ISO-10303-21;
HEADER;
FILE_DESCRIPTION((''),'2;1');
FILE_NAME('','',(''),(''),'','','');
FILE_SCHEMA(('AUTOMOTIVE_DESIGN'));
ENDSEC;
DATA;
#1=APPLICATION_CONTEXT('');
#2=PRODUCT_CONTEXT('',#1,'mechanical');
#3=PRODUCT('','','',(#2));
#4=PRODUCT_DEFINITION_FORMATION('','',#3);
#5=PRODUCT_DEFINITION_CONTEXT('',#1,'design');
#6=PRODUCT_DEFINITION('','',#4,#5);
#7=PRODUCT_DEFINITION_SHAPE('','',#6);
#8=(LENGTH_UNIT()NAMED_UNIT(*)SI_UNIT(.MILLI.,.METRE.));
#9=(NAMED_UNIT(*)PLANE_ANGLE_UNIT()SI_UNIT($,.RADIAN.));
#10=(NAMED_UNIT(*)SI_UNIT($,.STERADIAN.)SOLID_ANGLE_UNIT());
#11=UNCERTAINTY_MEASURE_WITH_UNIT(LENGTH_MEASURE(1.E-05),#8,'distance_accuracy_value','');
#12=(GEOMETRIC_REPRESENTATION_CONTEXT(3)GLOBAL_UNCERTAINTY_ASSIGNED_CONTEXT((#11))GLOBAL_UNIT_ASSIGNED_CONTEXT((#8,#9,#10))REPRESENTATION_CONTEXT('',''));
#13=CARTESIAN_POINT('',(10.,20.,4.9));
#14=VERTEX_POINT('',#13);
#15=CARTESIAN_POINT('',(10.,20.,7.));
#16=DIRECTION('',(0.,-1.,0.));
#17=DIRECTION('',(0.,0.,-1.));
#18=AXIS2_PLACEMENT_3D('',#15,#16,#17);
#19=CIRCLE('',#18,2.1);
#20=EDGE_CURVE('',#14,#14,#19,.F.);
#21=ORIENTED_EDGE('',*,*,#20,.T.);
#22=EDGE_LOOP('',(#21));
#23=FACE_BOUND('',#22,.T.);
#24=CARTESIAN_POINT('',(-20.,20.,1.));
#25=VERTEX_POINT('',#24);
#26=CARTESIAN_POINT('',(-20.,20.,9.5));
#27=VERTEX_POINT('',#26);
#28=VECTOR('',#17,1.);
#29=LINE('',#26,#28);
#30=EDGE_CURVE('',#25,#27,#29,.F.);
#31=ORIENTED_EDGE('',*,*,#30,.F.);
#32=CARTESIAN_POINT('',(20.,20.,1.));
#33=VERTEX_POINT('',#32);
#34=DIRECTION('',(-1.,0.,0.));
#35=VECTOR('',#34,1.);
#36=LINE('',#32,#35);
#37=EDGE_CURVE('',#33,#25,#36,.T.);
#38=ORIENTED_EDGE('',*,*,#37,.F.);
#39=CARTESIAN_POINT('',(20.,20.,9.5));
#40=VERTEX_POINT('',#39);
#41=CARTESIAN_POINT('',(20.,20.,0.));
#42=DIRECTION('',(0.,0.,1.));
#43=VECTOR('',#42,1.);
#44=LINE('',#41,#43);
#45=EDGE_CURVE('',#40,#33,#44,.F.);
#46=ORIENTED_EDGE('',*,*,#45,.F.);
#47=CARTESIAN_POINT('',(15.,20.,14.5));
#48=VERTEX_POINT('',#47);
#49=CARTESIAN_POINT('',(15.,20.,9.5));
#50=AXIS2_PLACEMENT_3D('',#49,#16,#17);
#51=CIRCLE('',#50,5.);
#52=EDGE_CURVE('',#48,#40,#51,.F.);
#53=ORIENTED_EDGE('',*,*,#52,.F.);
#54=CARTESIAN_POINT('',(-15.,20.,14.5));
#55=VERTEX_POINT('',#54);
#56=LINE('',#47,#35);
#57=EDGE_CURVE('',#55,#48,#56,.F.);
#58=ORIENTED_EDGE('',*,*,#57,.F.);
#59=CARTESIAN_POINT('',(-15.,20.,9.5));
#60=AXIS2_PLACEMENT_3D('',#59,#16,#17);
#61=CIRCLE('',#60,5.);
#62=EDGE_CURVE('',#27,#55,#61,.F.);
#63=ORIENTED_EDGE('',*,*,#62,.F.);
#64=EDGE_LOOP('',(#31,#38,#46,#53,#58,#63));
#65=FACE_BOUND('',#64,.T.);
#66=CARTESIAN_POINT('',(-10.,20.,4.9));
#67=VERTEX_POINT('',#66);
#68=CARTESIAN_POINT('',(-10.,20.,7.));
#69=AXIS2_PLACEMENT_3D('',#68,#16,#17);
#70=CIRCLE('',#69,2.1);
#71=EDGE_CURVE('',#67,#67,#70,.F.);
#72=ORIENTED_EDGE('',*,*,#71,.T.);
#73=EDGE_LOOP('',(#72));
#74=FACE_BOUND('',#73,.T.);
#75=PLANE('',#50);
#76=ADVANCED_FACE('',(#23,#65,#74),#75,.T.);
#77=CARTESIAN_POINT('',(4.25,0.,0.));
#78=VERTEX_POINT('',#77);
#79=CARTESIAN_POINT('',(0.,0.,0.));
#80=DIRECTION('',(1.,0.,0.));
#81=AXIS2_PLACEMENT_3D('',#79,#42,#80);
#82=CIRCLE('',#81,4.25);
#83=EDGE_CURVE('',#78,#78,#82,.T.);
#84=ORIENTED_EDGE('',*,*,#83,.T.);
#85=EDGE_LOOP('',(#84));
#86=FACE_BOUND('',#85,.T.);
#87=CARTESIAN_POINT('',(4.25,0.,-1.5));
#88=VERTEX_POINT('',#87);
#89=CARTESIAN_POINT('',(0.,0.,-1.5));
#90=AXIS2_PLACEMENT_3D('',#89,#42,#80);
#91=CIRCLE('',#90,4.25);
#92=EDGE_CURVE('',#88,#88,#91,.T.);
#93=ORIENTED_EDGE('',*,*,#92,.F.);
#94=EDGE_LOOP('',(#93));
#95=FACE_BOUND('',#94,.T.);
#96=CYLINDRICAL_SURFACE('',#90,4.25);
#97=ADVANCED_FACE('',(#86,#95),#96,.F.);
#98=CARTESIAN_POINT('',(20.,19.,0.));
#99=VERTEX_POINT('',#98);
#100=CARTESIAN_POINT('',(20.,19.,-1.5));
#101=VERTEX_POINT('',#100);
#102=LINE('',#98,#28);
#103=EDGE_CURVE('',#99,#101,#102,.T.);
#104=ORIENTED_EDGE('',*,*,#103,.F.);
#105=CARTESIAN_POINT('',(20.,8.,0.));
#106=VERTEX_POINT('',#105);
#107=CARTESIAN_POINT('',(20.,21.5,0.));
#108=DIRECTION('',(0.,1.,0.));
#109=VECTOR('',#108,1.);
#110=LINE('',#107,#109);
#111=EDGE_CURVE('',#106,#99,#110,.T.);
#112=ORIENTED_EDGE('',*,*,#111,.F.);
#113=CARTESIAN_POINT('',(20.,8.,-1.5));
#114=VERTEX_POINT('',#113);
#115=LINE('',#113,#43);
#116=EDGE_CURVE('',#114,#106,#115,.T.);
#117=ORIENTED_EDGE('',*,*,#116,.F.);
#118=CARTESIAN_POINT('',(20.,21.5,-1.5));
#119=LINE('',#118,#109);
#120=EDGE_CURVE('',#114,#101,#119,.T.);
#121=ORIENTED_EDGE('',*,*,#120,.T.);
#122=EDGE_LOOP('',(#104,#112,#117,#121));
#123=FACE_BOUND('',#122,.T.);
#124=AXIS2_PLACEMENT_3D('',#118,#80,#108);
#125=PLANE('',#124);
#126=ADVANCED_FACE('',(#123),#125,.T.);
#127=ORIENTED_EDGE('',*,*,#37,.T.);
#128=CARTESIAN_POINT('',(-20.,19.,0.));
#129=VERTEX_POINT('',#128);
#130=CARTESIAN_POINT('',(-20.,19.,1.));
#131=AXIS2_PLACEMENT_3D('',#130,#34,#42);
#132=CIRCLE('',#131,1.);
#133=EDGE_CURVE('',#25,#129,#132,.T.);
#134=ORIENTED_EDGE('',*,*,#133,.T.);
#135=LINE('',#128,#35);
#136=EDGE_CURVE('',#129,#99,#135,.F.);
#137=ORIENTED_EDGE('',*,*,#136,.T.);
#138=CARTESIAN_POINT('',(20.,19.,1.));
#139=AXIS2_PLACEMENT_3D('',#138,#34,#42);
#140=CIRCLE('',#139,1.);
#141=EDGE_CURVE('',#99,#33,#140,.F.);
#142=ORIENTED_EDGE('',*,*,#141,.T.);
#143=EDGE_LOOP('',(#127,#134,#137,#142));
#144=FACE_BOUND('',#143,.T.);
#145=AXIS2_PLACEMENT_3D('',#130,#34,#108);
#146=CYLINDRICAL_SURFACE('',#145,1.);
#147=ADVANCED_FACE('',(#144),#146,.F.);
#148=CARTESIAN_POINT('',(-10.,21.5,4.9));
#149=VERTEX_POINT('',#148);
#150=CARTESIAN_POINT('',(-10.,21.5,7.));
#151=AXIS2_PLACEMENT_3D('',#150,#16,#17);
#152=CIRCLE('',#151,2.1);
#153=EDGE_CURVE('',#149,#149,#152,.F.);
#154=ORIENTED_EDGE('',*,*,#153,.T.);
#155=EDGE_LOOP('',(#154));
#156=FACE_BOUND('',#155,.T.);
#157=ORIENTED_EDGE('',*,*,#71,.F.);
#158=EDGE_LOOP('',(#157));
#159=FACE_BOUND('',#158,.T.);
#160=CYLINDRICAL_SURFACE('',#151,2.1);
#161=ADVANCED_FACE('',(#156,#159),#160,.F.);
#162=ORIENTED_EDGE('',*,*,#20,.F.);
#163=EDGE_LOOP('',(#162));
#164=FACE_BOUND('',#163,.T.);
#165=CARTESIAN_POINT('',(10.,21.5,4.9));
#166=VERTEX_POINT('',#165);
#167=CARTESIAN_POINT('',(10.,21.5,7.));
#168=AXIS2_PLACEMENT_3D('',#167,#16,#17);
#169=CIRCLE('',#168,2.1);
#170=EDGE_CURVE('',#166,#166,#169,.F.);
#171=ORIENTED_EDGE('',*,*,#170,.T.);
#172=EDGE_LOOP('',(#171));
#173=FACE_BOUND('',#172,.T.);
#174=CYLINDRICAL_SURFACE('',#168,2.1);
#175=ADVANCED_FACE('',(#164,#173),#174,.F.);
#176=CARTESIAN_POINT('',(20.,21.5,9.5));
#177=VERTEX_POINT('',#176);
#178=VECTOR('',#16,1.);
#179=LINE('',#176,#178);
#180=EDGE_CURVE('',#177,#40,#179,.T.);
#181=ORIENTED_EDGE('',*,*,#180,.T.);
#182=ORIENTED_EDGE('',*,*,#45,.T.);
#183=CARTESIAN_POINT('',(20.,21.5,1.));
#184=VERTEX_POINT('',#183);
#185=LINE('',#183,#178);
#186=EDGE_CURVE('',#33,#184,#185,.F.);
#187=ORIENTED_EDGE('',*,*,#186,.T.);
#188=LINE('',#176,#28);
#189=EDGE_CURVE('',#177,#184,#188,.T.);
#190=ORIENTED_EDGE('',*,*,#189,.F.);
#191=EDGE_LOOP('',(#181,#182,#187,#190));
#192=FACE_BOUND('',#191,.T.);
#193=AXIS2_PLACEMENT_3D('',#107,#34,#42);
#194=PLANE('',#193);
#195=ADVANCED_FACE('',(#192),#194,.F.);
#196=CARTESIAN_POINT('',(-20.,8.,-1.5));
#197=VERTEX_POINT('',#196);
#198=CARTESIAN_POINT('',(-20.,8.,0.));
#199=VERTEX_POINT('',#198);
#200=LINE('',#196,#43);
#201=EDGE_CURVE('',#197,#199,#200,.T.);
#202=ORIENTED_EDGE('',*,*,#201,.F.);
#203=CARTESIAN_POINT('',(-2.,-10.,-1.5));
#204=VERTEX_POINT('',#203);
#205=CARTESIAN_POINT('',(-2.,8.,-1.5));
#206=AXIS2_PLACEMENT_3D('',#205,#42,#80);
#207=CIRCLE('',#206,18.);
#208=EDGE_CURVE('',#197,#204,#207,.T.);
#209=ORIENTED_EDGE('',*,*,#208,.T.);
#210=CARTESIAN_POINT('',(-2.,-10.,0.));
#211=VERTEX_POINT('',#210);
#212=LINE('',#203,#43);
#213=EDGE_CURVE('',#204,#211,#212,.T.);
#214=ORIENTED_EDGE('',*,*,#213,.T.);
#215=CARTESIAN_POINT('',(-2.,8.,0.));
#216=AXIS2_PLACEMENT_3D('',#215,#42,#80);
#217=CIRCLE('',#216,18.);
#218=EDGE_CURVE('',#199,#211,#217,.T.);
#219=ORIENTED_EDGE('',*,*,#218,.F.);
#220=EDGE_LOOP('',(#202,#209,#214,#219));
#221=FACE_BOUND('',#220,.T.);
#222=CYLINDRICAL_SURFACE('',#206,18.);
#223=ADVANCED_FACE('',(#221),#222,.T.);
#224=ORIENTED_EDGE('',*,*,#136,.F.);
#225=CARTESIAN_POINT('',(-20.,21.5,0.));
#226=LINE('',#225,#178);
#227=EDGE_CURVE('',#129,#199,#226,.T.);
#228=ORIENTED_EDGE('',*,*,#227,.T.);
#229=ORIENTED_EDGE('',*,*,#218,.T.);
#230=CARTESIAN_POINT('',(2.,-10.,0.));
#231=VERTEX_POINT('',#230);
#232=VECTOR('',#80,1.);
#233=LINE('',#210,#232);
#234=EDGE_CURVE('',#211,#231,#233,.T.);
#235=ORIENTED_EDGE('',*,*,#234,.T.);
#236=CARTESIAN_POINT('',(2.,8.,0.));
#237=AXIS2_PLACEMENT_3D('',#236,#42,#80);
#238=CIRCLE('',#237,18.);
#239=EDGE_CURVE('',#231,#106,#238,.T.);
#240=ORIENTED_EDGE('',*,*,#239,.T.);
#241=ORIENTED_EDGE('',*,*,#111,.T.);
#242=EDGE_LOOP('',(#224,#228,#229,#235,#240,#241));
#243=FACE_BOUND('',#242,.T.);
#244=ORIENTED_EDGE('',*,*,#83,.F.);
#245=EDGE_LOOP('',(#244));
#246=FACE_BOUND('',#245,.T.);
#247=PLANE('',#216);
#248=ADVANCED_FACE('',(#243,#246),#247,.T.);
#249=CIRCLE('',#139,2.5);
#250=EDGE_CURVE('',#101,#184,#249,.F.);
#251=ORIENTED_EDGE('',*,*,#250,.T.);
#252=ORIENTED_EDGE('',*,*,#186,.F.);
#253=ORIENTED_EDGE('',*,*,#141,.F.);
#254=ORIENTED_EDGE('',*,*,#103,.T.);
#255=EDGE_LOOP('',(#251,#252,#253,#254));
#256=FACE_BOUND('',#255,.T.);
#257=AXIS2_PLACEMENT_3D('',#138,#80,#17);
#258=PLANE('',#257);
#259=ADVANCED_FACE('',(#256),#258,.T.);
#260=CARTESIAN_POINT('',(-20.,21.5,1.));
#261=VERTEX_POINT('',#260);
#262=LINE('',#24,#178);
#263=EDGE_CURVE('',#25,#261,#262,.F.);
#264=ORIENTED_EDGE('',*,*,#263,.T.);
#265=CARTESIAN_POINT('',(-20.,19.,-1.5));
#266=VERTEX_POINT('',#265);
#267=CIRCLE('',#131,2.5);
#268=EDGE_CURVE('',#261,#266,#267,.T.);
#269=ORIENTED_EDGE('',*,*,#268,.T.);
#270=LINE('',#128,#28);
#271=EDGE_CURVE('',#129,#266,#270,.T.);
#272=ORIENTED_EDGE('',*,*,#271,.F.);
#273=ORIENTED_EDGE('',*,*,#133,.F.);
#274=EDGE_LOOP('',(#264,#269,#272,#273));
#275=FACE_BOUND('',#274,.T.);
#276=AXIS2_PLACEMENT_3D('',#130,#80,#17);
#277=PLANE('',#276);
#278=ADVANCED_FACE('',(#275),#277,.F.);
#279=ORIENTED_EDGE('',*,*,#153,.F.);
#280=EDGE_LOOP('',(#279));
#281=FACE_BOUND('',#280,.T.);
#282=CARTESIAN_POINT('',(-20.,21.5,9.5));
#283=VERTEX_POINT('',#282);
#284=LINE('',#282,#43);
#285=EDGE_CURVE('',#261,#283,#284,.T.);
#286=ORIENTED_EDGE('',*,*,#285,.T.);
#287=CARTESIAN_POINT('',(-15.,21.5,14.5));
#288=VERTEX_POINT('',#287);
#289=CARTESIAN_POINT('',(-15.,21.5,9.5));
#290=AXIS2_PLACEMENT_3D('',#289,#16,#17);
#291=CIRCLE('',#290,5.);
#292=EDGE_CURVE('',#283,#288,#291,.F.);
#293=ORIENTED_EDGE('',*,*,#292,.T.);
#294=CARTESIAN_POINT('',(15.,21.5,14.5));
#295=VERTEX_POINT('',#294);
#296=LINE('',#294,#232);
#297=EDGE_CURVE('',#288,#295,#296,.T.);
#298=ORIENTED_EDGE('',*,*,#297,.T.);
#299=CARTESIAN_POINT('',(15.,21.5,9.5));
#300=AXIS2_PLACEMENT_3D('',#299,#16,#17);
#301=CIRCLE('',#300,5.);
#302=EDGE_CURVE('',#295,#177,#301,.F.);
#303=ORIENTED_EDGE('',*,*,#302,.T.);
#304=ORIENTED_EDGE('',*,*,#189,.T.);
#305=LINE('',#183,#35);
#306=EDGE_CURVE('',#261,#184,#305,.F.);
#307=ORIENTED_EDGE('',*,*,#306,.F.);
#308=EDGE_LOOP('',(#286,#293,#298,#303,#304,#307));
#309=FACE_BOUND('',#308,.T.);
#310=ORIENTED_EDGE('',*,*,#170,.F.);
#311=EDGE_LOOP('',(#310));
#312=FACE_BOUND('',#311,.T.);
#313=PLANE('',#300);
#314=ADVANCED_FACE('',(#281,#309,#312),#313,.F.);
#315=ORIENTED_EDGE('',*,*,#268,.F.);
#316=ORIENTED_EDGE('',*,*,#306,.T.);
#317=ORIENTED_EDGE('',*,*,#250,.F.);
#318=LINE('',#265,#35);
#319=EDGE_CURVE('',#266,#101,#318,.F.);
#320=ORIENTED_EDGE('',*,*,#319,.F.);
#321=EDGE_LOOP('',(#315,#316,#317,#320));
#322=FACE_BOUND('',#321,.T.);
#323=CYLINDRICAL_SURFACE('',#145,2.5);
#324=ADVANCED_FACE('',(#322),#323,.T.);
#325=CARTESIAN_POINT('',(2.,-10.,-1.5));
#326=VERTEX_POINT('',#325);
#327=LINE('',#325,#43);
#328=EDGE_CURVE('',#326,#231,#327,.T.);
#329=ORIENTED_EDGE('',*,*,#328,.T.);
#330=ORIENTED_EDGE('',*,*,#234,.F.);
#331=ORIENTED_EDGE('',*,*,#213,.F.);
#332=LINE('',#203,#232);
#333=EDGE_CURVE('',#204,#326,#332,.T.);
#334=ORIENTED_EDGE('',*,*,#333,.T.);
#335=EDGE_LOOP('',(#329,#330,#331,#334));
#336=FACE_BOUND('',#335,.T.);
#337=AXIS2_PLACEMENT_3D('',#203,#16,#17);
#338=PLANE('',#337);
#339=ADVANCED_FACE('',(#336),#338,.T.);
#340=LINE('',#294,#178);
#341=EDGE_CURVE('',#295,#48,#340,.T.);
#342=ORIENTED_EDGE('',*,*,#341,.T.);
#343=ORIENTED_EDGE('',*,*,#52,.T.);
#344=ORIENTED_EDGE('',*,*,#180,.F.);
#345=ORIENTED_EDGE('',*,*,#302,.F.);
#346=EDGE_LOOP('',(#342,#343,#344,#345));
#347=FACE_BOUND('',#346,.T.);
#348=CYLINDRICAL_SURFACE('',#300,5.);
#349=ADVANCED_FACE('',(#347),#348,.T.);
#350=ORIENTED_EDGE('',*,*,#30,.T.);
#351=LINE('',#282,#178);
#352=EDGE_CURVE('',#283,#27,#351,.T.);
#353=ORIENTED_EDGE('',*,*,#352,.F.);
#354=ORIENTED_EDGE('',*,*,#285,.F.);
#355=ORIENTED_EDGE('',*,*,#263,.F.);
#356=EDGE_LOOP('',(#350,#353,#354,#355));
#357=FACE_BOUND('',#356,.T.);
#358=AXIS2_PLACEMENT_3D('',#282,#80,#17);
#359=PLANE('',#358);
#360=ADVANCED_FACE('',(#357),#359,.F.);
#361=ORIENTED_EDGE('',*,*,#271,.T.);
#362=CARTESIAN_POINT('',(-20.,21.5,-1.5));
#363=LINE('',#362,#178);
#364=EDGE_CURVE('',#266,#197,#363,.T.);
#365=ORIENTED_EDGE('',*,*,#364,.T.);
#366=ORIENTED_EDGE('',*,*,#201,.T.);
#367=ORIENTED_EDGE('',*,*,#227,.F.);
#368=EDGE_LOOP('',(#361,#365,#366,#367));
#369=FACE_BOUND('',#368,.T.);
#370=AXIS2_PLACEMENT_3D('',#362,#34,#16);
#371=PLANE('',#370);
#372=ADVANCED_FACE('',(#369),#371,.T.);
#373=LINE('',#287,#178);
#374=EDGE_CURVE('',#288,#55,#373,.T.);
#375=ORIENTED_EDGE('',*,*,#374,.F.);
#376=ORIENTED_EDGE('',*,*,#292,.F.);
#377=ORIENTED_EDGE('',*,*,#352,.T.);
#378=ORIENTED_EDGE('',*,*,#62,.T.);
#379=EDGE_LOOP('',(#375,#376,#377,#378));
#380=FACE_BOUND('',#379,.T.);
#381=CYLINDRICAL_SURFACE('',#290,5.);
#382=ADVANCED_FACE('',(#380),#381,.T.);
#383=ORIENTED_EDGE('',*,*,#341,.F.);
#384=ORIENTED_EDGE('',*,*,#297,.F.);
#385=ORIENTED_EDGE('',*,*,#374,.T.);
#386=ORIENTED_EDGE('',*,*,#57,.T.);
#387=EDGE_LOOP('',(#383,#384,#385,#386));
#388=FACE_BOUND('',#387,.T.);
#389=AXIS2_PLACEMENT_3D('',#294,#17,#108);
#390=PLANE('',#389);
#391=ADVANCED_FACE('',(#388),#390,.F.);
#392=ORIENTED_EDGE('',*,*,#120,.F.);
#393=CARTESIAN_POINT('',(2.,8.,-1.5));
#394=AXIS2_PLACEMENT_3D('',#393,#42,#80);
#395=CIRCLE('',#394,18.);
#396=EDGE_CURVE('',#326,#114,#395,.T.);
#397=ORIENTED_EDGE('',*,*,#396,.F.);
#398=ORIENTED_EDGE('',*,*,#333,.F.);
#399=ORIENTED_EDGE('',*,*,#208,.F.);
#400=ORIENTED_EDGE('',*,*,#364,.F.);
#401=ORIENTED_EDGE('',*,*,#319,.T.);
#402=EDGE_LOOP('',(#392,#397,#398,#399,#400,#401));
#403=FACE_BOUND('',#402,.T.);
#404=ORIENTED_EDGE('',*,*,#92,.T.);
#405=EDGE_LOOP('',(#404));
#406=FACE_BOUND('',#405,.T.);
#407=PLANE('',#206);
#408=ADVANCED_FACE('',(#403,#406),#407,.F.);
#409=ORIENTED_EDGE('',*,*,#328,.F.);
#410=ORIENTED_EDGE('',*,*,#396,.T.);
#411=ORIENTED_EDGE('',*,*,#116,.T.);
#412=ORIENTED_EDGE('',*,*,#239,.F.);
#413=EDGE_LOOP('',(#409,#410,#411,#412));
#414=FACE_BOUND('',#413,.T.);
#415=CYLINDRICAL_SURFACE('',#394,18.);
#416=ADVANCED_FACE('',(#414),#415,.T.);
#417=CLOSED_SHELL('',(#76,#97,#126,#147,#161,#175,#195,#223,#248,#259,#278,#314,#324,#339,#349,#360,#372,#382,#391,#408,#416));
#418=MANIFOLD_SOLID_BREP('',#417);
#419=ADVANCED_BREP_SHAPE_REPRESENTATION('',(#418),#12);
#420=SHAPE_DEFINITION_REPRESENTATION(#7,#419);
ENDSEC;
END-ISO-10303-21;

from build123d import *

# Parameters (mm, degrees)
SKETCH_1_R                       = 4.25
SM_BASE_FLANGE_1_DEPTH           = 1.5
SM_EDGE_FLANGE_1_STRIP_W         = 8
SM_EDGE_FLANGE_1_STRIP_H         = 1.5
SM_EDGE_FLANGE_1_STRIP_CUT_DEPTH = 40
SM_EDGE_FLANGE_1_DEPTH           = 40
SM_EDGE_FLANGE_1_PROFILE_R       = 2.1
SM_EDGE_FLANGE_1_FLAT_DEPTH      = 1.5


# Sheet-metal steps are written as plain solids
with BuildPart() as part:
    # Sketch 1 → 基体-法兰1 (new body)
    with BuildSketch(Plane.XY):
        with BuildLine():
            Line((-20, 21.5), (20, 21.5))
            Line((20, 21.5), (20, 8))
            ThreePointArc((20, 8), (14.727922061, -4.727922061), (2, -10))
            Line((2, -10), (-2, -10))
            ThreePointArc((-2, -10), (-14.727922061, -4.727922061), (-20, 8))
            Line((-20, 8), (-20, 21.5))
        make_face()
        Circle(SKETCH_1_R, mode=Mode.SUBTRACT)
    extrude(amount=-SM_BASE_FLANGE_1_DEPTH)

    # 边线-法兰1 strip (across the edge) → 边线-法兰1 strip cut (cut)
    with BuildSketch(Plane(origin=(20, 21.5, 0), x_dir=(0, -1, 0), z_dir=(-1, 0, 0))):
        with Locations((-1.5, -0.75)):
            Rectangle(SM_EDGE_FLANGE_1_STRIP_W, SM_EDGE_FLANGE_1_STRIP_H)
    extrude(amount=SM_EDGE_FLANGE_1_STRIP_CUT_DEPTH, mode=Mode.SUBTRACT)

    # 边线-法兰1 bend section (across the edge) → 边线-法兰1 (add)
    with BuildSketch(Plane(origin=(20, 21.5, 0), x_dir=(0, -1, 0), z_dir=(-1, 0, 0))):
        with BuildLine():
            Line((0, 1), (1.5, 1))
            ThreePointArc((1.5, 1), (1.792893219, 0.292893219), (2.5, 0))
            Line((2.5, 0), (2.5, -1.5))
            ThreePointArc((2.5, -1.5), (0.732233047, -0.767766953), (0, 1))
        make_face()
    extrude(amount=SM_EDGE_FLANGE_1_DEPTH)

    # 边线-法兰1 profile (on flange) → 边线-法兰1 flat (add)
    with BuildSketch(Plane(origin=(0, 21.5, 0), x_dir=(-1, 0, 0), z_dir=(0, 1, 0))):
        with BuildLine():
            Line((15, 14.5), (-15, 14.5))
            ThreePointArc((-15, 14.5), (-18.535533906, 13.035533906), (-20, 9.5))
            Line((-20, 9.5), (-20, 1))
            Line((-20, 1), (20, 1))
            Line((20, 1), (20, 9.5))
            ThreePointArc((20, 9.5), (18.535533906, 13.035533906), (15, 14.5))
        make_face()
        with Locations((-10, 7)):
            Circle(SM_EDGE_FLANGE_1_PROFILE_R, mode=Mode.SUBTRACT)
        with Locations((10, 7)):
            Circle(SM_EDGE_FLANGE_1_PROFILE_R, mode=Mode.SUBTRACT)
    extrude(amount=-SM_EDGE_FLANGE_1_FLAT_DEPTH)


solid = part.part
